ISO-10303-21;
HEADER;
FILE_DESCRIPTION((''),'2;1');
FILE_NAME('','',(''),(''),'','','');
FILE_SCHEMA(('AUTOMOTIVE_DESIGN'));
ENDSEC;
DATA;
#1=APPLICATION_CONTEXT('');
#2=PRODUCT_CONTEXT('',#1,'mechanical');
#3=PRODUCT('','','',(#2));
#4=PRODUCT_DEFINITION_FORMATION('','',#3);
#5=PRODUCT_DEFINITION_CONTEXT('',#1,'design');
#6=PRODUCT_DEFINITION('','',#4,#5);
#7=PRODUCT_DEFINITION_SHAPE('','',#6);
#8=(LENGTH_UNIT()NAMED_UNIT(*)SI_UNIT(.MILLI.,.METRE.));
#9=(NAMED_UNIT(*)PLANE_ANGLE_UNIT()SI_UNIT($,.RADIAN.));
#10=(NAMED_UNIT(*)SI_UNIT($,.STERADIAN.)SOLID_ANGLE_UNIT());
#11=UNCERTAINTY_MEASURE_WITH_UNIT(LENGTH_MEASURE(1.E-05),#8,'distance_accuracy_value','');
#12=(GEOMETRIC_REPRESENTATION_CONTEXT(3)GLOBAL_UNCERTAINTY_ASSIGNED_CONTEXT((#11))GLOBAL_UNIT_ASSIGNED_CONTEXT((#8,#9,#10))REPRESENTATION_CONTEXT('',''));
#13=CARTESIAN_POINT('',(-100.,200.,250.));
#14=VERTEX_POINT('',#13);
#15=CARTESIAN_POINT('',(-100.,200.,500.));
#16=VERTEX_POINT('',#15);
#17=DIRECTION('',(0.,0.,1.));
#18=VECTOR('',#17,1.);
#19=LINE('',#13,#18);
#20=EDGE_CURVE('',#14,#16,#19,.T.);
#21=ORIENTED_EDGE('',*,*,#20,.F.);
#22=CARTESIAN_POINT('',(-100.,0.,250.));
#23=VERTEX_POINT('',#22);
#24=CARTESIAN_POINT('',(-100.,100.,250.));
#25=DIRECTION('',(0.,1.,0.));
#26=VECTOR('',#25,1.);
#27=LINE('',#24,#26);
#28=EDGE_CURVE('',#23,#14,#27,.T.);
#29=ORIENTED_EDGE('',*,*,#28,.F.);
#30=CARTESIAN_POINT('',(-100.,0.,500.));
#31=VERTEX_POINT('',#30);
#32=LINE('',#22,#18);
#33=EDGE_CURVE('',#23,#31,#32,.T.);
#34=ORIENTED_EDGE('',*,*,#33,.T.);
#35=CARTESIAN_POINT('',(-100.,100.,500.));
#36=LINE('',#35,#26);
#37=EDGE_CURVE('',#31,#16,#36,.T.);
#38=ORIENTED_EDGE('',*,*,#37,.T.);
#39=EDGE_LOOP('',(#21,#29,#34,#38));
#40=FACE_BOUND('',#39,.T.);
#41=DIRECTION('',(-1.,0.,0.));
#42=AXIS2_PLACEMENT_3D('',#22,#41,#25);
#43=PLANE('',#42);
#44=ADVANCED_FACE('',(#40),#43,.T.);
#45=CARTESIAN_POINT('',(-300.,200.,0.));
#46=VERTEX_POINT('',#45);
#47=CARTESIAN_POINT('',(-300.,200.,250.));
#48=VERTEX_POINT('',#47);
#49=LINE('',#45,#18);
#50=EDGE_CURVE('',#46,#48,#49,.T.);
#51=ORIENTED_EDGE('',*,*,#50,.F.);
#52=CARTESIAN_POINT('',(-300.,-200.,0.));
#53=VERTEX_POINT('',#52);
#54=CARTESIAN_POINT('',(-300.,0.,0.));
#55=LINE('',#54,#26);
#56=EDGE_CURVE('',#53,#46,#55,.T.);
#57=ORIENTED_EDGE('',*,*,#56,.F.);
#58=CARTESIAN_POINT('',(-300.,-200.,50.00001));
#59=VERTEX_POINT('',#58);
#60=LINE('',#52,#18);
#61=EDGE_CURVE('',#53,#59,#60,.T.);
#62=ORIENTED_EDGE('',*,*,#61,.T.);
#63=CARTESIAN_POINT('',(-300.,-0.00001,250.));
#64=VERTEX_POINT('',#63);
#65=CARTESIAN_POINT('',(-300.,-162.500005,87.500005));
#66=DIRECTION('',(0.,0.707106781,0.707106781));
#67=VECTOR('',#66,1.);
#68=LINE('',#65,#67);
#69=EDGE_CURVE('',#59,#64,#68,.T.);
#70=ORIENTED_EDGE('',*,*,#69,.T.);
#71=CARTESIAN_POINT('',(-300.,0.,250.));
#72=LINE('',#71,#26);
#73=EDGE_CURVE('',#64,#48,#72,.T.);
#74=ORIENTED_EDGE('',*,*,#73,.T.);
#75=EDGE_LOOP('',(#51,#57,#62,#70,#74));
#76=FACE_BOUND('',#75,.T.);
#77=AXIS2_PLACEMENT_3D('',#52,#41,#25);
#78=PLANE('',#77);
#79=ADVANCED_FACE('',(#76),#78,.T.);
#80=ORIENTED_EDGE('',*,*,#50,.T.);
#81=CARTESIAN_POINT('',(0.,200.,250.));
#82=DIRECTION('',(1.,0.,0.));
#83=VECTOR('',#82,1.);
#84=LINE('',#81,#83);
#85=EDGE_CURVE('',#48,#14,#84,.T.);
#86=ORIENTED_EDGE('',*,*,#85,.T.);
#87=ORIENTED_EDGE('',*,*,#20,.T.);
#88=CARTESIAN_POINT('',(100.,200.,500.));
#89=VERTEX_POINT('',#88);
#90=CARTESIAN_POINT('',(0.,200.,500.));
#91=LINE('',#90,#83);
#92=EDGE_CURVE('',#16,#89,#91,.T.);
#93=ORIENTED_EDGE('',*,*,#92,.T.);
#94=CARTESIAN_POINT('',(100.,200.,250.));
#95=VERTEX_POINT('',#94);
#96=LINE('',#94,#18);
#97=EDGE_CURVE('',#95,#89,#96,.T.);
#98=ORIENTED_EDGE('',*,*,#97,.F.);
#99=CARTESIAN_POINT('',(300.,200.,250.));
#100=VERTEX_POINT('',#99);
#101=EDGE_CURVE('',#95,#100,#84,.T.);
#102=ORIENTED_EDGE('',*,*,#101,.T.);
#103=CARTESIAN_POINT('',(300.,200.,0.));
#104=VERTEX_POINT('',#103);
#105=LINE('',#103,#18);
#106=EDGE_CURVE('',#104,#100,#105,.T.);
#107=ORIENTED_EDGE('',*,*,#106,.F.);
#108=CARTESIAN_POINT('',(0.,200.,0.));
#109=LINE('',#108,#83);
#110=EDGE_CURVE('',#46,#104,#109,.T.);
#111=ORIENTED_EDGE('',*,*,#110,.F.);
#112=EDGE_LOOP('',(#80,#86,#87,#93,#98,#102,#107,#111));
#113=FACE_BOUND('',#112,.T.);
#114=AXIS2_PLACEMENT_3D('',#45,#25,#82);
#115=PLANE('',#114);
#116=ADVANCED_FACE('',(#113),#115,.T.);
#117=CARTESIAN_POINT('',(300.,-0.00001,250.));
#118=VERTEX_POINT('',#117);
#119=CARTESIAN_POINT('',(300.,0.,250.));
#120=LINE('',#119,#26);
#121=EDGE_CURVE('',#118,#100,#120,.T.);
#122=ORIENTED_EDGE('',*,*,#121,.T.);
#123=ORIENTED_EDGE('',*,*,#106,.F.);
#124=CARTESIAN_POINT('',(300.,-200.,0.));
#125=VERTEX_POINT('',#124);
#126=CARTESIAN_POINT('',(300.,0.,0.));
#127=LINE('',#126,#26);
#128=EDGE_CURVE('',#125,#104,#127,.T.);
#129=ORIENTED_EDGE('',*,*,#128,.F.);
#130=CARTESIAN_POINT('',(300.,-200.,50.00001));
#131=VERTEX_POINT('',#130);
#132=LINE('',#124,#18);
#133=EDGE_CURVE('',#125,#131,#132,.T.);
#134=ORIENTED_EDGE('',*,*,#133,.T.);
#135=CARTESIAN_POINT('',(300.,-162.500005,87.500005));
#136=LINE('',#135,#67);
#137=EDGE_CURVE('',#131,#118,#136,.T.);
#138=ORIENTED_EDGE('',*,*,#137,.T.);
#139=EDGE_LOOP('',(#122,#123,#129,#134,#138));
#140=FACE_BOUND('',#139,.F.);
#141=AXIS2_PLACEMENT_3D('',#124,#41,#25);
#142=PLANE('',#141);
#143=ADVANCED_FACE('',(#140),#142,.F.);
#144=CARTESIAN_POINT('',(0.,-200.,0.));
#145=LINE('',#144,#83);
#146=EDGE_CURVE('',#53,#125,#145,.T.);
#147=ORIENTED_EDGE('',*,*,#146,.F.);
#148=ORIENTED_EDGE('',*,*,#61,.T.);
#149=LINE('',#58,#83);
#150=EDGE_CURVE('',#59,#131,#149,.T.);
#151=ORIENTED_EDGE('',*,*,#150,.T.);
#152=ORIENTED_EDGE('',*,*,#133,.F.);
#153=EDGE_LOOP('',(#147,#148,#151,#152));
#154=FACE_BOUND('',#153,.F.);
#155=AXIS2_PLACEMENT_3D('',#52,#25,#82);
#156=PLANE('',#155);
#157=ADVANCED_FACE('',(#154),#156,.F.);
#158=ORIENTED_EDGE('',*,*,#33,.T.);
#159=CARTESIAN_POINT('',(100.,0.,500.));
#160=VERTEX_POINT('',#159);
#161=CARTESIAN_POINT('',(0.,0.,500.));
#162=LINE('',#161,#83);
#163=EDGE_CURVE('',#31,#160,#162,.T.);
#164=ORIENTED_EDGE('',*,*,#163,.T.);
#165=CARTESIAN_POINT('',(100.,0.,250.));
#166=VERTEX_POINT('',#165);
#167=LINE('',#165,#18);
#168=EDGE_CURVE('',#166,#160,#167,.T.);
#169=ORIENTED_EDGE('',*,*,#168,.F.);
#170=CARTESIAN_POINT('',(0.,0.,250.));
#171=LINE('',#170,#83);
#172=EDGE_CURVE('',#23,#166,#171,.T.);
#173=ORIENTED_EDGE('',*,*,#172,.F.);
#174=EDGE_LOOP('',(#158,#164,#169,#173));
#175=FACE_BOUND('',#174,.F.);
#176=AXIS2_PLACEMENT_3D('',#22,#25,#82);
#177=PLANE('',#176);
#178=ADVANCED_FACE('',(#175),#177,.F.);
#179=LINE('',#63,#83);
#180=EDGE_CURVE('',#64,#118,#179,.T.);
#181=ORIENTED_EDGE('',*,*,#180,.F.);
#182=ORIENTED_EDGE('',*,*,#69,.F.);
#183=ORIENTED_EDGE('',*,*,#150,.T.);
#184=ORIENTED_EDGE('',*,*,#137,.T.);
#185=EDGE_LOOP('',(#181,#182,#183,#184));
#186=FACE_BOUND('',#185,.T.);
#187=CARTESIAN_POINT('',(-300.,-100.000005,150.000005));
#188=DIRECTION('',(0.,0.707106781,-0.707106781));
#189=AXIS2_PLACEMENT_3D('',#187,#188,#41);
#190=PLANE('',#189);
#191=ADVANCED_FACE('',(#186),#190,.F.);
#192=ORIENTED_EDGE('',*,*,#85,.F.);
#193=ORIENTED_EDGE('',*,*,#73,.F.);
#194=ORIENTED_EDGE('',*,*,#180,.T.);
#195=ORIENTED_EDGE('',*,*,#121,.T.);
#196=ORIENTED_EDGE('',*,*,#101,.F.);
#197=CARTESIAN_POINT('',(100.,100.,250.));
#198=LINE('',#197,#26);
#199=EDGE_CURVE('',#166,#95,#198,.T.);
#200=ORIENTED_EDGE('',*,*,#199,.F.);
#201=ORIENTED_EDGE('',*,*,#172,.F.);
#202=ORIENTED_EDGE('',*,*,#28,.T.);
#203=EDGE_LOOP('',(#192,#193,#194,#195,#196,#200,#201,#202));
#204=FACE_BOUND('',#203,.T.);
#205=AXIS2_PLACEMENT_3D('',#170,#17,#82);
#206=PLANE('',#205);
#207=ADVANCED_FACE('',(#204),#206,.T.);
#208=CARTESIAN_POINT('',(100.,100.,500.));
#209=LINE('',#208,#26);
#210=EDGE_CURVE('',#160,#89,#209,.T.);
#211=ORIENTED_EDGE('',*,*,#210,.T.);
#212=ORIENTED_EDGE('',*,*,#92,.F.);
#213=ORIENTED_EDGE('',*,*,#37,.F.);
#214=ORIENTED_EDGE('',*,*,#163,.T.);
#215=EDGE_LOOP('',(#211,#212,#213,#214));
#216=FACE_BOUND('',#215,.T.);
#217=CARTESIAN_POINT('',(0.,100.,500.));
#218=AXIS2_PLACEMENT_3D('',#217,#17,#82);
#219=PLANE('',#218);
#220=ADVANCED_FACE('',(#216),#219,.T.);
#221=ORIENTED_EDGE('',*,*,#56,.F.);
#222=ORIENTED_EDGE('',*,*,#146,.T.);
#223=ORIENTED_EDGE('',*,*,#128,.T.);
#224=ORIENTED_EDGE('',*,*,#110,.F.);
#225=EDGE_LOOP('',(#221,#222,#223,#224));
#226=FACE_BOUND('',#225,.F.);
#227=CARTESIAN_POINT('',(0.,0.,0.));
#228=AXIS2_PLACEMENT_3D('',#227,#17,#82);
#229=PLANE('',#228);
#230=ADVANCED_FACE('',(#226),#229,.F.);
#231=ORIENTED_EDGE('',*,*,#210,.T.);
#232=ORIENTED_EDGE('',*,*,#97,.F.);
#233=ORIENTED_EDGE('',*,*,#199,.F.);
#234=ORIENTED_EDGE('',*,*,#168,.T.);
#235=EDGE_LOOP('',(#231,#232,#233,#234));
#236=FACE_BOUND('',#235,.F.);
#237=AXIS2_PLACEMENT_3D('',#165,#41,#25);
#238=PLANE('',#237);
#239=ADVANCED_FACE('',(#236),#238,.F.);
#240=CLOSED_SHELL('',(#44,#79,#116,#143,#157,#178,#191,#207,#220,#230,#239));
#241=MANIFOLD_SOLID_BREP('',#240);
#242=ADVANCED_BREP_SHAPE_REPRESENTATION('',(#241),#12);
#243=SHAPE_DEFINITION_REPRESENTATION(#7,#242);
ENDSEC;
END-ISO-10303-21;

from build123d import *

# Parameters (mm, degrees)
F0_W     = 600
F0_H     = 400
F1_DEPTH = 250
F2_W     = 200
F2_H     = 200
F3_DEPTH = 250
F4_SIZE  = 199.99999


# Not quite as in the source:
# - a fillet or chamfer is up to 0.001 mm smaller than in the source, because OpenCascade refuses the exact size


with BuildPart() as f1:
    # F0 (on Top) → F1 (new body)
    with BuildSketch(Plane.XY):
        Rectangle(F0_W, F0_H)
    extrude(amount=F1_DEPTH)

    # F2 (on face) → F3 (join)
    with BuildSketch(Plane.XY.offset(250)):
        with Locations((0, 100)):
            Rectangle(F2_W, F2_H)
    extrude(amount=F3_DEPTH)

    # F4 (size 200 in the source; OpenCascade refuses exactly that, so slightly less here)
    f4_edges = [f1.edges().sort_by_distance(p)[0] for p in [
        (0, -200, 250),
    ]]
    chamfer(f4_edges, length=F4_SIZE)


solid = f1.part
